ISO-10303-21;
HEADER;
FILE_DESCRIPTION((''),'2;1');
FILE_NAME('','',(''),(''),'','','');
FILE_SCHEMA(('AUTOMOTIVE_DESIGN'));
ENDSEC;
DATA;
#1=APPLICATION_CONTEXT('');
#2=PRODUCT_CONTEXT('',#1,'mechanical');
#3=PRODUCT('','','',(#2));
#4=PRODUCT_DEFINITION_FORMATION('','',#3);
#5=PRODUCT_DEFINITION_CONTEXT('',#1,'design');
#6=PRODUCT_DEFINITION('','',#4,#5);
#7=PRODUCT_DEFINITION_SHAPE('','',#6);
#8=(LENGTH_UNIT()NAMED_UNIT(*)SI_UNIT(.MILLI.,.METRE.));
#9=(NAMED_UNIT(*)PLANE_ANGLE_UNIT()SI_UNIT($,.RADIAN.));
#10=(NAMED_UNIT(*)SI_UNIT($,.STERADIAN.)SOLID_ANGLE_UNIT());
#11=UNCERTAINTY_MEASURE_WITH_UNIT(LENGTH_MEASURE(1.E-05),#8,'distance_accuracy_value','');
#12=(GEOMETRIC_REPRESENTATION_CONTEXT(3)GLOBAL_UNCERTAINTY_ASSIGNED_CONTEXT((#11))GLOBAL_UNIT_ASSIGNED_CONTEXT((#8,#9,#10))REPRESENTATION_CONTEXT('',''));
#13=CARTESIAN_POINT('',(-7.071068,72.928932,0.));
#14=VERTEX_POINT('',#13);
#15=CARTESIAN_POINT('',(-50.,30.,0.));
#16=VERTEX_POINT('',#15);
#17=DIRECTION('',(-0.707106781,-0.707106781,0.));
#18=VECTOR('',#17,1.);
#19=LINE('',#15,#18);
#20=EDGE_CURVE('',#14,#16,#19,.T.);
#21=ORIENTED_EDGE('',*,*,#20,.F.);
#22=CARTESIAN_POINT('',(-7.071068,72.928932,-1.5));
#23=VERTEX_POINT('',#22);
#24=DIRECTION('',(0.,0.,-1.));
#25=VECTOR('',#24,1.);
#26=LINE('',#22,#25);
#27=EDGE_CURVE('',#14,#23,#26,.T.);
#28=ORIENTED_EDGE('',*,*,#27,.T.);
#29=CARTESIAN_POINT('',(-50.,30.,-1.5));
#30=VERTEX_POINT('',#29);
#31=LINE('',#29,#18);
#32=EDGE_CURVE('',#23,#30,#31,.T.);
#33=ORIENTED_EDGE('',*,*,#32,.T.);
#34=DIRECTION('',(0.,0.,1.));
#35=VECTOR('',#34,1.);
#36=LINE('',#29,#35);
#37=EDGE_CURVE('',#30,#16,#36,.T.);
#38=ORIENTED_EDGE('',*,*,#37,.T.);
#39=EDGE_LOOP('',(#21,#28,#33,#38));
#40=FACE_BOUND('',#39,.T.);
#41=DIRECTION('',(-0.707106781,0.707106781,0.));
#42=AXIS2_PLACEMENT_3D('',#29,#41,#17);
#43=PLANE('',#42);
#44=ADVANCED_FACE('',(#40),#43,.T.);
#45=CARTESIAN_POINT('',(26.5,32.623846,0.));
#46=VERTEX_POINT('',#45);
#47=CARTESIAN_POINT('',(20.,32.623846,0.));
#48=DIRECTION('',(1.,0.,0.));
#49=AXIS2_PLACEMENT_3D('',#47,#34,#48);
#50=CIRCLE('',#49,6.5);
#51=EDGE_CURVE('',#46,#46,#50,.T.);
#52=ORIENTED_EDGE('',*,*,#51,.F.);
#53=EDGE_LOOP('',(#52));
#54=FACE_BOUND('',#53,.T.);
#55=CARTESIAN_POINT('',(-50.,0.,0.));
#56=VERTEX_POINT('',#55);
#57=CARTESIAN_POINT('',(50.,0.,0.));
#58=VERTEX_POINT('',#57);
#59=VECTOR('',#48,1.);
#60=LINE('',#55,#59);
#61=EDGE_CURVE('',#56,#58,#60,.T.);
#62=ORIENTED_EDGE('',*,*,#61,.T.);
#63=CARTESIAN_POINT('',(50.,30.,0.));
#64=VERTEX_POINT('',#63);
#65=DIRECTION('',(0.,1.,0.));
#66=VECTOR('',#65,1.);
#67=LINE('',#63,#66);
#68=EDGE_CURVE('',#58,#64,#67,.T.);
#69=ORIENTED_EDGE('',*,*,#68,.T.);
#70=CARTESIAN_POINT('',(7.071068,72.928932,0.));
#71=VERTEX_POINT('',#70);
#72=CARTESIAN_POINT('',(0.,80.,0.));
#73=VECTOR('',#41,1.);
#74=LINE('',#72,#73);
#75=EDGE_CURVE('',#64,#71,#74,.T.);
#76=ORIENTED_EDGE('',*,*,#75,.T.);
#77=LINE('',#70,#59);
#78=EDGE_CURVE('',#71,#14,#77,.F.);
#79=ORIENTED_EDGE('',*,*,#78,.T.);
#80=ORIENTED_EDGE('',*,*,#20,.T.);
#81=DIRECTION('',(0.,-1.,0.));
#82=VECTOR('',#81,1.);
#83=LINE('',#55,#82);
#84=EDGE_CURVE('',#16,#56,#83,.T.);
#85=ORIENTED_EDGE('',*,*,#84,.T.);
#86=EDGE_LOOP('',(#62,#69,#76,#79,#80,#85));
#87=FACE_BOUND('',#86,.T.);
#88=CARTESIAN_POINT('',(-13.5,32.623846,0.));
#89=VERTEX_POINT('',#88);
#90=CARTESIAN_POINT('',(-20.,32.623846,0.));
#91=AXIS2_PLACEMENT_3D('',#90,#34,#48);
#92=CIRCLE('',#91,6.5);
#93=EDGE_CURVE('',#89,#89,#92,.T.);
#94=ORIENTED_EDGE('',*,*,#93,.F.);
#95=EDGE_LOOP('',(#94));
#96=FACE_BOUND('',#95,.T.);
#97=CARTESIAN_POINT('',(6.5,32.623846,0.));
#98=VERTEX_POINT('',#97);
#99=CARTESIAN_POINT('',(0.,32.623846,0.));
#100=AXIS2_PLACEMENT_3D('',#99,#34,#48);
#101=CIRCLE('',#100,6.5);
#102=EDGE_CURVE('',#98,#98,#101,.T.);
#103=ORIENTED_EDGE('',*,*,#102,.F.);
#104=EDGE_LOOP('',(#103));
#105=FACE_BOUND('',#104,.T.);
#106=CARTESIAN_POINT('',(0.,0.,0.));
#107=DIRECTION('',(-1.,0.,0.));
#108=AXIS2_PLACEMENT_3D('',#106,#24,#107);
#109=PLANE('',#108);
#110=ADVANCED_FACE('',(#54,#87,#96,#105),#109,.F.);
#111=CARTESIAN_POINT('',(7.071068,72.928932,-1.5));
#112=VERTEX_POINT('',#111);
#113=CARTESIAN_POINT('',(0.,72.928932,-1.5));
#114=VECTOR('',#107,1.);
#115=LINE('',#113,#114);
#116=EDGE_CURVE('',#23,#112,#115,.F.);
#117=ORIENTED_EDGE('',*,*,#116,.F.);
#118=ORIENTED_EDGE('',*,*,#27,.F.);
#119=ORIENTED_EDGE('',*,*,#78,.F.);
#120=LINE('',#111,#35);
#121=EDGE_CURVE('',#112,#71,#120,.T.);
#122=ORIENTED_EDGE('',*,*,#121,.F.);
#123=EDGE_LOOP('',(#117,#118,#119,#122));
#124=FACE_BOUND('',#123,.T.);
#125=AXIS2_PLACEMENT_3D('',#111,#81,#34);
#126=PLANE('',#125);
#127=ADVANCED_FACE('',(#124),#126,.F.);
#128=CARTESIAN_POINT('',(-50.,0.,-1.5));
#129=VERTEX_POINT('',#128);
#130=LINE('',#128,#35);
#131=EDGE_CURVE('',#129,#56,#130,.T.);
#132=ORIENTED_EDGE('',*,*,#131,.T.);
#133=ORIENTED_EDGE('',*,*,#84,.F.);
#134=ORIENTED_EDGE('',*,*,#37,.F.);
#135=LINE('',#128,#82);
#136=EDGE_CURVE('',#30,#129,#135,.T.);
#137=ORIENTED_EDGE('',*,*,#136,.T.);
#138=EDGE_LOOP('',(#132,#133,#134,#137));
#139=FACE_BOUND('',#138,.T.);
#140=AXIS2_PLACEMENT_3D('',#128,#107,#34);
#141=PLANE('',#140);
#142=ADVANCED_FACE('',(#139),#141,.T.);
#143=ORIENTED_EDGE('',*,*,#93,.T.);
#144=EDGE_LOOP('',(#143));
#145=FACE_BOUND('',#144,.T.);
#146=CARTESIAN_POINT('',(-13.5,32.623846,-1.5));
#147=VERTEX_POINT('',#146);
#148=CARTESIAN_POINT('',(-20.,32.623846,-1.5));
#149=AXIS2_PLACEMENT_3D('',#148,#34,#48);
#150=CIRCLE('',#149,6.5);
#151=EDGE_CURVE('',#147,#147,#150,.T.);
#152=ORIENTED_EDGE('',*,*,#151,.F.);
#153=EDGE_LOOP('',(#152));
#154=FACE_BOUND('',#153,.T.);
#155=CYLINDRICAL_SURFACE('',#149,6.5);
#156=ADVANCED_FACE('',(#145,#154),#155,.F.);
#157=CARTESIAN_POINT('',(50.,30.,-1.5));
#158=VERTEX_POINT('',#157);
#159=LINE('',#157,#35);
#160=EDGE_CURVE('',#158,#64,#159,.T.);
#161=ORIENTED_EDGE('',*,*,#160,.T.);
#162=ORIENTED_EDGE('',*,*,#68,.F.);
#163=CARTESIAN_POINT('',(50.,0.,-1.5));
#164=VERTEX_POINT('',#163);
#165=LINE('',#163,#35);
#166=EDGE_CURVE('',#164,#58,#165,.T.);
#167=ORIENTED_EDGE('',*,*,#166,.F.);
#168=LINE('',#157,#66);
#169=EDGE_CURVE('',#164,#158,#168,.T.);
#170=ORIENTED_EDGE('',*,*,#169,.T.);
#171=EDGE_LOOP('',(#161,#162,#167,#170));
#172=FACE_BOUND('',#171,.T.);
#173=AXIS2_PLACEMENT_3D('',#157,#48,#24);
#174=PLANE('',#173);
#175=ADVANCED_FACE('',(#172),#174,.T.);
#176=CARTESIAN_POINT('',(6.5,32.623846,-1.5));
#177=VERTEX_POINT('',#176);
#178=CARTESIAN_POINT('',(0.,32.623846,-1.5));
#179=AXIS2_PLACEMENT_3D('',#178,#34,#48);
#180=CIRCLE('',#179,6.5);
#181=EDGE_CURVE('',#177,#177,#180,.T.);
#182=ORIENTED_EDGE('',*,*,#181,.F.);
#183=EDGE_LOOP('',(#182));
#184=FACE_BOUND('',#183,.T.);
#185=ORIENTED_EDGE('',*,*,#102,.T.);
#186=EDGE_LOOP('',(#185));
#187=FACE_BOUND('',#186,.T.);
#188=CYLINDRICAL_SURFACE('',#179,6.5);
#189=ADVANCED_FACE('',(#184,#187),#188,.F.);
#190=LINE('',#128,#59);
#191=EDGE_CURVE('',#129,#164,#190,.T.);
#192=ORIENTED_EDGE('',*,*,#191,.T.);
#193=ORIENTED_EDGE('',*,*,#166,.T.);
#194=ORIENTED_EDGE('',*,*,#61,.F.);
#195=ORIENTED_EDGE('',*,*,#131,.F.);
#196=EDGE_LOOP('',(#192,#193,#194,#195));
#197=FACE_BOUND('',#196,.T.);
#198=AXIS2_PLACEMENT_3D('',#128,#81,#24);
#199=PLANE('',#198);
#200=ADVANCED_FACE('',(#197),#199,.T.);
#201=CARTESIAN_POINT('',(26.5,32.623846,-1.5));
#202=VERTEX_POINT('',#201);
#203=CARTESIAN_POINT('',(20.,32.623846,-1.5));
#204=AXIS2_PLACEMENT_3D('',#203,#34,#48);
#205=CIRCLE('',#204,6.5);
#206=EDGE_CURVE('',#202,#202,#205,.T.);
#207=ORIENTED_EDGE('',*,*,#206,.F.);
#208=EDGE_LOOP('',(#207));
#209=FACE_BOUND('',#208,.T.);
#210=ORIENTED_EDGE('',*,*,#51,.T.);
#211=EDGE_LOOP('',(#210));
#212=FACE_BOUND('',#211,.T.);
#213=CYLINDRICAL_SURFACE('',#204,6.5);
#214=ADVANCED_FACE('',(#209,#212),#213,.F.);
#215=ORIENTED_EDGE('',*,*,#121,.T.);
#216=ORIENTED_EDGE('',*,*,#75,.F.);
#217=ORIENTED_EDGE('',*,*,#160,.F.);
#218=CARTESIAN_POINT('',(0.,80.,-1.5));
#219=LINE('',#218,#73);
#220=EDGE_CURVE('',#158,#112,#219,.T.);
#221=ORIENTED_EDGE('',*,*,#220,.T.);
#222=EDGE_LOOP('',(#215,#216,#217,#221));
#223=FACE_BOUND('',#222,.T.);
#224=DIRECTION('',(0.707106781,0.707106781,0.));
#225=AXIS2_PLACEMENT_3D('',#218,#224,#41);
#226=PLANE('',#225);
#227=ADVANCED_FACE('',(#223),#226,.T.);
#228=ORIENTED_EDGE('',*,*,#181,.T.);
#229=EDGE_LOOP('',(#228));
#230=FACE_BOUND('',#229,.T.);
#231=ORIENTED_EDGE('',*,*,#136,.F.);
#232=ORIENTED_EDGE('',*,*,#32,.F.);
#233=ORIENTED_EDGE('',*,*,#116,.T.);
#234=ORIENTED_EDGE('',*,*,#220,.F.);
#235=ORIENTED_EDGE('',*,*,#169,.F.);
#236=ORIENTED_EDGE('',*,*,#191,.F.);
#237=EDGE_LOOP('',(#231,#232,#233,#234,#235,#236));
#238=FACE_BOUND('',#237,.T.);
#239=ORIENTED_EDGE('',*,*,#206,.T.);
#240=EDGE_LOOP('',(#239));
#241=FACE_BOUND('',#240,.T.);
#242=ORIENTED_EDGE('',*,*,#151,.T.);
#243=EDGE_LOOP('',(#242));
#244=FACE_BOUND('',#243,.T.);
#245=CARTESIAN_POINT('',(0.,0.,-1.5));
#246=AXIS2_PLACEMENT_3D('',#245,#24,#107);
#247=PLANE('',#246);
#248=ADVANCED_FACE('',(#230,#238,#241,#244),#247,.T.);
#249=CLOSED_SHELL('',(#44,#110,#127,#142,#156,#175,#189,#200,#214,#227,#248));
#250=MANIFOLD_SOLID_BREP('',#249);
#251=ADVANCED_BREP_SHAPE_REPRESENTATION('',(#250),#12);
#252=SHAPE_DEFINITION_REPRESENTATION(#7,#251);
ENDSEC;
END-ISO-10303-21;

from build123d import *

# Parameters (mm, degrees)
SM_BASE_FLANGE_1_DEPTH     = 1.5
SKETCH_6_R                 = 6.5
CUT_EXTRUDE_1_DEPTH        = 10
PATTERN_LINEAR_1_COUNT     = 2
PATTERN_LINEAR_1_PITCH     = 20
PATTERN_LINEAR_1_COL_COUNT = 2
PATTERN_LINEAR_1_COL_PITCH = 20
CHAMFER_1_SIZE             = 10


# Sheet-metal steps are written as plain solids
with BuildPart() as part:
    # Sketch 1 → Базовая кромка1 (new body)
    with BuildSketch(Plane.XY):
        Polygon((-50, 0), (50, 0), (50, 30), (0, 80), (-50, 30), align=None)
    extrude(amount=-SM_BASE_FLANGE_1_DEPTH)

    # Эскиз6 → Вырез-Вытянуть1 (cut)
    with BuildSketch(Plane.XY):
        with Locations((0, 32.623845661)):
            Circle(SKETCH_6_R)
    cut_extrude_1 = extrude(amount=-CUT_EXTRUDE_1_DEPTH, mode=Mode.SUBTRACT)

    # Линейный массив1: Вырез-Вытянуть1 ×2
    with Locations(*[(-i * PATTERN_LINEAR_1_PITCH, 0, 0) for i in range(1, PATTERN_LINEAR_1_COUNT)]):
        add(cut_extrude_1, mode=Mode.SUBTRACT)

    # Линейный массив1 col: Вырез-Вытянуть1 ×2
    with Locations(*[(i * PATTERN_LINEAR_1_COL_PITCH, 0, 0) for i in range(1, PATTERN_LINEAR_1_COL_COUNT)]):
        add(cut_extrude_1, mode=Mode.SUBTRACT)

    # Фаска1
    chamfer_1_edges = [part.edges().sort_by_distance(p)[0] for p in [
        (0, 80, -0.75),
    ]]
    chamfer(chamfer_1_edges, length=CHAMFER_1_SIZE)


solid = part.part
